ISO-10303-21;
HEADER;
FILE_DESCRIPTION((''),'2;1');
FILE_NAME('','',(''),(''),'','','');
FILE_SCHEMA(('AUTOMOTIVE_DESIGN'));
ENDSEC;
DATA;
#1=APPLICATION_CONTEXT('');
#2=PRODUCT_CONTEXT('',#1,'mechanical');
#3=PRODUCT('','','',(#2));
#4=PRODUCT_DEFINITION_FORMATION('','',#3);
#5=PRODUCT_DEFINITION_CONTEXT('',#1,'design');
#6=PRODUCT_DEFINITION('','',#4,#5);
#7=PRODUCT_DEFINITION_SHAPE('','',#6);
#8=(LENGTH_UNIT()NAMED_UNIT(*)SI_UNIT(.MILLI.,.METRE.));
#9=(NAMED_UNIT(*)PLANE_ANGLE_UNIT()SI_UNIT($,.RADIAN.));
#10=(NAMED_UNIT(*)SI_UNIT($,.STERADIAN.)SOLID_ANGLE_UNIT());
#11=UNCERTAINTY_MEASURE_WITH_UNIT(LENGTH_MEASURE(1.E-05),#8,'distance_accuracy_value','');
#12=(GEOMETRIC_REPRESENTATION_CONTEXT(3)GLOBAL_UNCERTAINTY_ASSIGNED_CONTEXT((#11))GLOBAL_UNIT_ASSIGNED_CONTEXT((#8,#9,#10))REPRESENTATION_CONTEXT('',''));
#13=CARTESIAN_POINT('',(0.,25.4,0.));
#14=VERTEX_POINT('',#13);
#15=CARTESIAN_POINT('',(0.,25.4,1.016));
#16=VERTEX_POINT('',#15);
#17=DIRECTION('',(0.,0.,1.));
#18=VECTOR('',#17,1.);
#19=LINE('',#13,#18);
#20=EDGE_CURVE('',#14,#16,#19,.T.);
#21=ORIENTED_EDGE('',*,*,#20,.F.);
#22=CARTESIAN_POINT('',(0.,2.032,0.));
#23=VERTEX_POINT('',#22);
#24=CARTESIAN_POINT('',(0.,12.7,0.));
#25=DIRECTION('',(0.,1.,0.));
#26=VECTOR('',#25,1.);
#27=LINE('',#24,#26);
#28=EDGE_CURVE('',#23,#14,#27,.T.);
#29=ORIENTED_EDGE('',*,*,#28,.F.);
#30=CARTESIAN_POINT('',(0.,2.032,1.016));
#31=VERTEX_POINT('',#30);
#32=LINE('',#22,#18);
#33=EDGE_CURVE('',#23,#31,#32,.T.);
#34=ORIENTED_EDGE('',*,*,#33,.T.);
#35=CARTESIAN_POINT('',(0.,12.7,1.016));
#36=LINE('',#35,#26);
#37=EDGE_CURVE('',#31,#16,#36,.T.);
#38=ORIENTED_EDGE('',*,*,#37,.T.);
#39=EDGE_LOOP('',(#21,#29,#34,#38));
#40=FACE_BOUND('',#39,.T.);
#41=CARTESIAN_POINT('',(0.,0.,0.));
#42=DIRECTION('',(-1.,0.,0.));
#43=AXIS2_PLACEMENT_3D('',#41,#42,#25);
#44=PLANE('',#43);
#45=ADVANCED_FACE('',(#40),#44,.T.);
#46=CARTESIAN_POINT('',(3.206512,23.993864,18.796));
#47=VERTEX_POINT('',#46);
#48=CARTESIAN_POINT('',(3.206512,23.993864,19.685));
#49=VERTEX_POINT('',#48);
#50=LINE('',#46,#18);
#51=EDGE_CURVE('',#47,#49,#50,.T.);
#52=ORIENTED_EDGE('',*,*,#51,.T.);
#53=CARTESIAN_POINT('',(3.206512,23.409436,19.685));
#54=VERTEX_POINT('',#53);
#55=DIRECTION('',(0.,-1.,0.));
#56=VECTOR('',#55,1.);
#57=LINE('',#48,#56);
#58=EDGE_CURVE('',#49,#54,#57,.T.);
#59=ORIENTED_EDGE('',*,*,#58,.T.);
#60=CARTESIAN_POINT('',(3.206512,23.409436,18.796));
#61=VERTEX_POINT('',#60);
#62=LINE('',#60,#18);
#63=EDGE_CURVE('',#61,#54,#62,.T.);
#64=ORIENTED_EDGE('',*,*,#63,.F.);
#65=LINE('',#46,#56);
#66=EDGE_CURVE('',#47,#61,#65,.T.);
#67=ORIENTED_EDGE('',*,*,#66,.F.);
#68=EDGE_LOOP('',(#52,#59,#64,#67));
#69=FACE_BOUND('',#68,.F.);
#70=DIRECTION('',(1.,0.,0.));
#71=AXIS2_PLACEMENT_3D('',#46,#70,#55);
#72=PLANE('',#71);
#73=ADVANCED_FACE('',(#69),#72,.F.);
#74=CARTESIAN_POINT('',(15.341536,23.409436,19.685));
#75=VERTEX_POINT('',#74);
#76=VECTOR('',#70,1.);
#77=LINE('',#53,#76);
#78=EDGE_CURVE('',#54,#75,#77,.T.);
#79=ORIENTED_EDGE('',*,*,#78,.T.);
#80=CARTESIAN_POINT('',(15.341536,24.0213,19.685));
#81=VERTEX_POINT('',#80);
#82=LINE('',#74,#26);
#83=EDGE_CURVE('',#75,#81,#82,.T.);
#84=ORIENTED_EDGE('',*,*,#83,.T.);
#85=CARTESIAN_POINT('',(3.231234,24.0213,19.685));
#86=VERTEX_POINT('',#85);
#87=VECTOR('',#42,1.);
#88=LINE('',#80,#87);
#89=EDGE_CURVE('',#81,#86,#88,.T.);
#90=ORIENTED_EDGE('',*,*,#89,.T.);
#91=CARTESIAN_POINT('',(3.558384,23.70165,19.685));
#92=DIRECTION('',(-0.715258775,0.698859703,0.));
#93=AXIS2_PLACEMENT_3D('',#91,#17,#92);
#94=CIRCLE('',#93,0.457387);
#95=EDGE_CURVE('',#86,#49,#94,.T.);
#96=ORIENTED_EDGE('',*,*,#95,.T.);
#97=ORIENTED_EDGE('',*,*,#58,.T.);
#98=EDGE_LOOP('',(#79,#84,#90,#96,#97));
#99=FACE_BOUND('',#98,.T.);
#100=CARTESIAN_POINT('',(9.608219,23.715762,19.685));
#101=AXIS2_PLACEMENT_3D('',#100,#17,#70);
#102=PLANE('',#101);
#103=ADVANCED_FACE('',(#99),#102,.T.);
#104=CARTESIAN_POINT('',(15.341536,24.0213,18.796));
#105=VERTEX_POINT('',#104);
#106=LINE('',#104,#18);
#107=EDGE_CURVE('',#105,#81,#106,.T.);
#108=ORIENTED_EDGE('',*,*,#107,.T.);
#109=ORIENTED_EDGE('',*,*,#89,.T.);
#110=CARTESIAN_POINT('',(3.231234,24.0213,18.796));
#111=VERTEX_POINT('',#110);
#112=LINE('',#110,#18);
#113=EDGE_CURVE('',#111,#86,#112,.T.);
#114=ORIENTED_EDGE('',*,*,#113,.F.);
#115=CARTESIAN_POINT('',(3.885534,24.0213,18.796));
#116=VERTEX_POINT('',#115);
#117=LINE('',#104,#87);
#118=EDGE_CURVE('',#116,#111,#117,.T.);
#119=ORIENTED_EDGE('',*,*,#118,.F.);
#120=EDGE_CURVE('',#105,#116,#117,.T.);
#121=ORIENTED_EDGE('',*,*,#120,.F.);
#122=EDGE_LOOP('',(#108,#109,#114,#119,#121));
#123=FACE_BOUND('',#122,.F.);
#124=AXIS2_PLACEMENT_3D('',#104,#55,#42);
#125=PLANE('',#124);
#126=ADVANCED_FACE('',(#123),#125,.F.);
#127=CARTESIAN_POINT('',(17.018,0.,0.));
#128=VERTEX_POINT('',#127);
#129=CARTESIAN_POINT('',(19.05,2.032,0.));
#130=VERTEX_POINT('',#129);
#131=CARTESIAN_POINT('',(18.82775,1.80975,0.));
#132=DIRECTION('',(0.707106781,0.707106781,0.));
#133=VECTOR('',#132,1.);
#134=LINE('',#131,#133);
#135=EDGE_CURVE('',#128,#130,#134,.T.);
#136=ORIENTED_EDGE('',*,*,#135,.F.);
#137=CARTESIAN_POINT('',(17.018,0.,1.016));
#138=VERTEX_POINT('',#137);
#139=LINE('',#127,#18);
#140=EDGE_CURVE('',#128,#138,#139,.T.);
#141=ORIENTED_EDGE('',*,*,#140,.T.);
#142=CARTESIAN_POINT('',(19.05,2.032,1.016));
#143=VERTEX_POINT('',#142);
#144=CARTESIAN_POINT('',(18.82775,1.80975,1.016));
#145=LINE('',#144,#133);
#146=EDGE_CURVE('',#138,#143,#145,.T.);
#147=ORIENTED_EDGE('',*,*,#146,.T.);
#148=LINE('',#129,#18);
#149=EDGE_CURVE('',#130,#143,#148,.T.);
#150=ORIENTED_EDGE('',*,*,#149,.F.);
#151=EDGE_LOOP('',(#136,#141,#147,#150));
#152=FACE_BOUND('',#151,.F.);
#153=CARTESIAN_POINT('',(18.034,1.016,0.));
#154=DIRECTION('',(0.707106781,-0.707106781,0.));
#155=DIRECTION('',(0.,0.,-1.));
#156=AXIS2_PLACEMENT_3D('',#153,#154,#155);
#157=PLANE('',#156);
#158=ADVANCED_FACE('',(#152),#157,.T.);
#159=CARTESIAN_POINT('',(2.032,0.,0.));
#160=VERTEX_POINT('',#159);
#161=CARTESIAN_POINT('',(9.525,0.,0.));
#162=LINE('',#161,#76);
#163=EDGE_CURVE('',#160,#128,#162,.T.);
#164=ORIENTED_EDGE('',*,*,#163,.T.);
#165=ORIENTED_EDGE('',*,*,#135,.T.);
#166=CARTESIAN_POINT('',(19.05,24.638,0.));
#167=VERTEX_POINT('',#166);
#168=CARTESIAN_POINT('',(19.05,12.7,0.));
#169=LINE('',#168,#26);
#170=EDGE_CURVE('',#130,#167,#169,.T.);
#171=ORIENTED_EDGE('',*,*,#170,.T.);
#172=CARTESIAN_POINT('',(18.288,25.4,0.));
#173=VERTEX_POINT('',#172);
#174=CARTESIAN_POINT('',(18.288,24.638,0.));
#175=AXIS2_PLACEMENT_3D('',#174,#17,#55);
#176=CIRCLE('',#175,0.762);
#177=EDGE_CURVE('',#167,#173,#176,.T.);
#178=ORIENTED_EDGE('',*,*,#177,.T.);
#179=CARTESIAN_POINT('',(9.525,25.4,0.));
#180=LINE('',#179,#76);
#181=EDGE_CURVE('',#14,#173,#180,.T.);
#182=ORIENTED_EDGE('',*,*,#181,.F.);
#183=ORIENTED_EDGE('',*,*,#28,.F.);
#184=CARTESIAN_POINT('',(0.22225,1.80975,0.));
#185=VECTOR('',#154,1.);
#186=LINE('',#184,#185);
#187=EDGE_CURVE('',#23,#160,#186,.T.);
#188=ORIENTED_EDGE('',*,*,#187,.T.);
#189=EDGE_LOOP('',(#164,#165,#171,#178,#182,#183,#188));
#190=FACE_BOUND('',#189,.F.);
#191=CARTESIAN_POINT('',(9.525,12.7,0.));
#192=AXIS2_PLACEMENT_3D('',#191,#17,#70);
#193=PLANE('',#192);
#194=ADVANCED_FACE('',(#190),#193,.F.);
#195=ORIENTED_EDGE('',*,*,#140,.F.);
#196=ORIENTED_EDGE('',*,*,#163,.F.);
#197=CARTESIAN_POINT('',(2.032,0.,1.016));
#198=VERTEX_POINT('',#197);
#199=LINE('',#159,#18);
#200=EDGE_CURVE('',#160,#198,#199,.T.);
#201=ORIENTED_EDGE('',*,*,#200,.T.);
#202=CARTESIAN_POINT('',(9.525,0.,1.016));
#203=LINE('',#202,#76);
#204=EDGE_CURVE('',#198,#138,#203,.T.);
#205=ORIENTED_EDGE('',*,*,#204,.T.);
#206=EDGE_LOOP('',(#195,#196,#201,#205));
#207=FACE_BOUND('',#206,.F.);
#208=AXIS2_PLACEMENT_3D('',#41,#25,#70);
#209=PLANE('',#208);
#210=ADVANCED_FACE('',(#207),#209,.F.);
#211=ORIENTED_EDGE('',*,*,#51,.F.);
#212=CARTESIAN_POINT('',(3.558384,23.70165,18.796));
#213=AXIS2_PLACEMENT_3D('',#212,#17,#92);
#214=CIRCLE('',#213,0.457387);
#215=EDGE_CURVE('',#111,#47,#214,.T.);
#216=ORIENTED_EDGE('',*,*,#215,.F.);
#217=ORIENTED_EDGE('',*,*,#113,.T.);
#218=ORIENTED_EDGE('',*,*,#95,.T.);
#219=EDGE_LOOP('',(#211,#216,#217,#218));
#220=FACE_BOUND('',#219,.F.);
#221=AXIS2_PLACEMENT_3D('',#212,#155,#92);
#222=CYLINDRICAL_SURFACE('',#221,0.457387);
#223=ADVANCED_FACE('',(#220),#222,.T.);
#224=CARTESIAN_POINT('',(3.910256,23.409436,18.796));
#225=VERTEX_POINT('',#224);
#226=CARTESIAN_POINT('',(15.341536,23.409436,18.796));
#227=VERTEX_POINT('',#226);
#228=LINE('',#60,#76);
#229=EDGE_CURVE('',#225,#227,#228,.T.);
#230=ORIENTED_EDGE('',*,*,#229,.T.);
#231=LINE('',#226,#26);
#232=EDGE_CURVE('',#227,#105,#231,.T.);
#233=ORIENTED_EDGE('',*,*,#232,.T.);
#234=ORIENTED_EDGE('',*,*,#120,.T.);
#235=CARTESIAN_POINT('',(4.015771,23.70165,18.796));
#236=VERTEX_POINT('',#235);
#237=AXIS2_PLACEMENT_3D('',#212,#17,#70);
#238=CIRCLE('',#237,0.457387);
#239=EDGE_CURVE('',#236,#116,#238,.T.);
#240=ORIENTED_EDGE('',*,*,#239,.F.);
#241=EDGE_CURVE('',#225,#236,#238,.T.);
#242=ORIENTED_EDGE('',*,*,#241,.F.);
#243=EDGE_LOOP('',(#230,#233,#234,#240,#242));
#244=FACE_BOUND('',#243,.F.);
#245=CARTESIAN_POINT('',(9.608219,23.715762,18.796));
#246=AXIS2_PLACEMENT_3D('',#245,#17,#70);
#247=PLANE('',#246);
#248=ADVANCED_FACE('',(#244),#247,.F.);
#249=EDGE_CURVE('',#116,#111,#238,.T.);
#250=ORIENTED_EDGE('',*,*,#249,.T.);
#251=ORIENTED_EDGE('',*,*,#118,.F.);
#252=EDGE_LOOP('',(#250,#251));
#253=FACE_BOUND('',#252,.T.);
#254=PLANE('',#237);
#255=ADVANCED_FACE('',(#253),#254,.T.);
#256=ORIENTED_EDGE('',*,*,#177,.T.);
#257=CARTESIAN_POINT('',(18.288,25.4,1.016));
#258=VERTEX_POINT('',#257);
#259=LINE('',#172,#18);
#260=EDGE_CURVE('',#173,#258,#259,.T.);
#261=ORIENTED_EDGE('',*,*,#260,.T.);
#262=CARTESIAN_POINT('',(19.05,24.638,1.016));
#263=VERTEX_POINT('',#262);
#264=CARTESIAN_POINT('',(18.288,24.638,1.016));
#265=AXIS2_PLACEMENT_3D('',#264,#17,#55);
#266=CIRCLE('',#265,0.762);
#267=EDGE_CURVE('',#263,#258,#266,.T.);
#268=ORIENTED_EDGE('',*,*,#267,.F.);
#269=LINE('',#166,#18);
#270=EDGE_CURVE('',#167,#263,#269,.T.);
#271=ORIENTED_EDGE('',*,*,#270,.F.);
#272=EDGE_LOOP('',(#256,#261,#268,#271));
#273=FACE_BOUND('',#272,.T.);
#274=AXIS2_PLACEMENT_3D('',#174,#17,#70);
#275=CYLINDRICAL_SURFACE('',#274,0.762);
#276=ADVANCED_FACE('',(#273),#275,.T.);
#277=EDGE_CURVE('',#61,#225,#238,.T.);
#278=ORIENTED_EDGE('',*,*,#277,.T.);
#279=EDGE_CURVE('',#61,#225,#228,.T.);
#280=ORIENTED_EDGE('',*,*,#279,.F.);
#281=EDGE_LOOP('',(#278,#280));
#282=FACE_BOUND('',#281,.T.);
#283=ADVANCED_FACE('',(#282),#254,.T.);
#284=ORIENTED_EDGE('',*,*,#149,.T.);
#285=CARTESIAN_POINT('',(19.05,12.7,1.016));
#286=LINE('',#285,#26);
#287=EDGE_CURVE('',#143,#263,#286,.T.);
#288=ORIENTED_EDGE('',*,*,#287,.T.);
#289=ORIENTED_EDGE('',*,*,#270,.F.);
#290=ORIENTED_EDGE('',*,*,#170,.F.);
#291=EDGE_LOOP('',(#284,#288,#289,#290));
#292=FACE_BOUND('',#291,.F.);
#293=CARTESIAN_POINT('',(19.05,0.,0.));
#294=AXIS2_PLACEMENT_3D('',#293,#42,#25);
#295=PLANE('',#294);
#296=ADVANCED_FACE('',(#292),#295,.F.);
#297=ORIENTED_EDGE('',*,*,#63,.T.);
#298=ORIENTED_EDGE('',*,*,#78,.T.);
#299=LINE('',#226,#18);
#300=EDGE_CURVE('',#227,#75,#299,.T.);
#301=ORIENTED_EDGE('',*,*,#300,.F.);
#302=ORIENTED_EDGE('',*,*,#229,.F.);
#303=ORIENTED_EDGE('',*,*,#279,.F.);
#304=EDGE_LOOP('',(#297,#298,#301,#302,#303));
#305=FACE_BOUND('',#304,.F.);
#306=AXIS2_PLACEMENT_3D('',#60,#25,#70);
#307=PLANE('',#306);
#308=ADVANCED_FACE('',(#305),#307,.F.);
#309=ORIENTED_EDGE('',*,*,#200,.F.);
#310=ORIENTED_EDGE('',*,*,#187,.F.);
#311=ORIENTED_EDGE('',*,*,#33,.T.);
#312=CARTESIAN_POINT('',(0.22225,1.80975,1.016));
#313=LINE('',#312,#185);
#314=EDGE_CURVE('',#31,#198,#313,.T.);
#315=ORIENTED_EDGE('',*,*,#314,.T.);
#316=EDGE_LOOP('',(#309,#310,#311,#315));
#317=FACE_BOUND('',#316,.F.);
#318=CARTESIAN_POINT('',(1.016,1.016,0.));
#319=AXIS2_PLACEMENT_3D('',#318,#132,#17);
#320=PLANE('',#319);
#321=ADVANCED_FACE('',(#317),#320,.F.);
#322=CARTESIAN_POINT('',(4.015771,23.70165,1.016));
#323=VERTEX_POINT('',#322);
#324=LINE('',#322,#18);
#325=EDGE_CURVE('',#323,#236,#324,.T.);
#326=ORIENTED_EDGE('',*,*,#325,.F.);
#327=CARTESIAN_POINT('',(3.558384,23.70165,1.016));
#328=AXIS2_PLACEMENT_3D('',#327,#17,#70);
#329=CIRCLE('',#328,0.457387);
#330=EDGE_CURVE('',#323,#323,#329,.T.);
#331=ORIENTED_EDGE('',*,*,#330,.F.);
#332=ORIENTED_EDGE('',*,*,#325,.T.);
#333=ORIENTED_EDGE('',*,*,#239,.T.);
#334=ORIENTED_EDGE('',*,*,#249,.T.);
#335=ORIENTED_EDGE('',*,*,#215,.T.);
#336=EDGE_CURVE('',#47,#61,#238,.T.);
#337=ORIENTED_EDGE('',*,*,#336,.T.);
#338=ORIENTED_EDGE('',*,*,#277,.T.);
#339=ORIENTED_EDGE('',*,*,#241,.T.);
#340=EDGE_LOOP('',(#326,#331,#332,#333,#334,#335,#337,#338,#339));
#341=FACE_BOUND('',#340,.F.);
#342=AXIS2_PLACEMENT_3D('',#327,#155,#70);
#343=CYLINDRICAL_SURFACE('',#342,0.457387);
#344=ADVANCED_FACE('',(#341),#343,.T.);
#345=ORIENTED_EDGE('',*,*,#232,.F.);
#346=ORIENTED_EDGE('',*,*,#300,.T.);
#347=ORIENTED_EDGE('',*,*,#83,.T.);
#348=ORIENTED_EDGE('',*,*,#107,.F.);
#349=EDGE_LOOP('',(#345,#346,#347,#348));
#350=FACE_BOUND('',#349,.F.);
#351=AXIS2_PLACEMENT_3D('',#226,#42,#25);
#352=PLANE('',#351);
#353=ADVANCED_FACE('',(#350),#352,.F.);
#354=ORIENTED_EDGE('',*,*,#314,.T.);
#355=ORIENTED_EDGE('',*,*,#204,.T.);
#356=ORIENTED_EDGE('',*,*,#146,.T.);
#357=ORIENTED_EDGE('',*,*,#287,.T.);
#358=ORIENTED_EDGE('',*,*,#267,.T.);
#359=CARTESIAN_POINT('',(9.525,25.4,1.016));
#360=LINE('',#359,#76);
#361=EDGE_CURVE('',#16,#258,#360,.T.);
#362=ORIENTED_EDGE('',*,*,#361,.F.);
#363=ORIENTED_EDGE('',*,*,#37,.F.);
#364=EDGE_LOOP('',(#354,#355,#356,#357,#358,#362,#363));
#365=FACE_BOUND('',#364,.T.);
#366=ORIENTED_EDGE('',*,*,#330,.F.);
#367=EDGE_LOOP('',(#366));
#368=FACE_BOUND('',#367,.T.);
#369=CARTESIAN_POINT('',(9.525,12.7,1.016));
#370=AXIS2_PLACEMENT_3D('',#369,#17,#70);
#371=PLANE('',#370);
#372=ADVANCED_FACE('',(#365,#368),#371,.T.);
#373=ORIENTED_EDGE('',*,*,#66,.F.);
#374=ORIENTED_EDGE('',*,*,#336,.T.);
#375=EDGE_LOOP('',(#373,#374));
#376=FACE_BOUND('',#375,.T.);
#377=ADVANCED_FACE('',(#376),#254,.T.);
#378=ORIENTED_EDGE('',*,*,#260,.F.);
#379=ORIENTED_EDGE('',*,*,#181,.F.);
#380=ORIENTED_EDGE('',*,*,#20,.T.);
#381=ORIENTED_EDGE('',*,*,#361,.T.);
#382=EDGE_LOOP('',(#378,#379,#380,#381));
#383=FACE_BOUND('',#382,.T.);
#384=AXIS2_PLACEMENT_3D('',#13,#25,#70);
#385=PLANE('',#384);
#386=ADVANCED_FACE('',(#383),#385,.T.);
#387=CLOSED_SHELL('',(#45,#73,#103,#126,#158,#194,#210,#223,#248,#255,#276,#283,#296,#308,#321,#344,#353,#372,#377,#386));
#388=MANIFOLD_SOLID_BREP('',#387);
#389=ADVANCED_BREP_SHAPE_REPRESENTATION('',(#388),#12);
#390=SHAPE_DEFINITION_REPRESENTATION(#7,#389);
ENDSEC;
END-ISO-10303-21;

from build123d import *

# Parameters (mm, degrees)
F0_W     = 19.05
F0_H     = 25.4
F1_DEPTH = 1.016
F2_SIZE  = 2.032
F3_SIZE  = 2.032
F4_R     = 0.762
F5_R     = 0.4573869554
F6_DEPTH = 17.78
F9_DEPTH = 0.889


# Not quite as in the source:
# - the program builds the solid bodies; features that only make, move or delete a surface that nothing else refers to are left out


with BuildPart() as f1:
    # F0 (on Top) → F1 (new body)
    with BuildSketch(Plane.XY):
        with Locations((9.525, 12.7)):
            Rectangle(F0_W, F0_H)
    extrude(amount=F1_DEPTH)

    # F2
    f2_edges = [f1.edges().sort_by_distance(p)[0] for p in [
        (0, 0, 0.508),
    ]]
    chamfer(f2_edges, length=F2_SIZE)

    # F3
    f3_edges = [f1.edges().sort_by_distance(p)[0] for p in [
        (19.05, 0, 0.508),
    ]]
    chamfer(f3_edges, length=F3_SIZE)

    # F4
    f4_edges = [f1.edges().sort_by_distance(p)[0] for p in [
        (19.05, 25.4, 0.508),
    ]]
    fillet(f4_edges, radius=F4_R)

    # F5 (on face) → F6 (join)
    with BuildSketch(Plane.XY.offset(1.016)):
        with Locations((3.5583837889, 23.701650244)):
            Circle(F5_R)
    extrude(amount=F6_DEPTH)

    # F8 (on face) → F9 (join)
    with BuildSketch(Plane.XY.offset(18.796)):
        with BuildLine():
            ThreePointArc((4.0157707443, 23.701650244), (3.9885840141, 23.5463099941), (3.9102557402, 23.4094363551))
            Line((3.9102557402, 23.4094363551), (15.3415361419, 23.4094363551))
            Line((15.3415361419, 23.4094363551), (15.3415361419, 24.0212995559))
            Line((15.3415361419, 24.0212995559), (3.8855338223, 24.0212995559))
            ThreePointArc((3.8855338223, 24.0212995559), (3.9819619899, 23.8742316295), (4.0157707443, 23.701650244))
        make_face()
        with BuildLine():
            Line((3.2065118376, 23.9938641329), (3.2065118376, 23.4094363551))
            Line((3.2065118376, 23.4094363551), (3.9102557402, 23.4094363551))
            ThreePointArc((3.9102557402, 23.4094363551), (3.9885840141, 23.5463099941), (4.0157707443, 23.701650244))
            ThreePointArc((4.0157707443, 23.701650244), (3.9819619899, 23.8742316295), (3.8855338223, 24.0212995559))
            Line((3.8855338223, 24.0212995559), (3.2312337555, 24.0212995559))
            ThreePointArc((3.2312337555, 24.0212995559), (3.2185957822, 24.0078314607), (3.2065118376, 23.9938641329))
        make_face()
    extrude(amount=F9_DEPTH)


solid = f1.part
